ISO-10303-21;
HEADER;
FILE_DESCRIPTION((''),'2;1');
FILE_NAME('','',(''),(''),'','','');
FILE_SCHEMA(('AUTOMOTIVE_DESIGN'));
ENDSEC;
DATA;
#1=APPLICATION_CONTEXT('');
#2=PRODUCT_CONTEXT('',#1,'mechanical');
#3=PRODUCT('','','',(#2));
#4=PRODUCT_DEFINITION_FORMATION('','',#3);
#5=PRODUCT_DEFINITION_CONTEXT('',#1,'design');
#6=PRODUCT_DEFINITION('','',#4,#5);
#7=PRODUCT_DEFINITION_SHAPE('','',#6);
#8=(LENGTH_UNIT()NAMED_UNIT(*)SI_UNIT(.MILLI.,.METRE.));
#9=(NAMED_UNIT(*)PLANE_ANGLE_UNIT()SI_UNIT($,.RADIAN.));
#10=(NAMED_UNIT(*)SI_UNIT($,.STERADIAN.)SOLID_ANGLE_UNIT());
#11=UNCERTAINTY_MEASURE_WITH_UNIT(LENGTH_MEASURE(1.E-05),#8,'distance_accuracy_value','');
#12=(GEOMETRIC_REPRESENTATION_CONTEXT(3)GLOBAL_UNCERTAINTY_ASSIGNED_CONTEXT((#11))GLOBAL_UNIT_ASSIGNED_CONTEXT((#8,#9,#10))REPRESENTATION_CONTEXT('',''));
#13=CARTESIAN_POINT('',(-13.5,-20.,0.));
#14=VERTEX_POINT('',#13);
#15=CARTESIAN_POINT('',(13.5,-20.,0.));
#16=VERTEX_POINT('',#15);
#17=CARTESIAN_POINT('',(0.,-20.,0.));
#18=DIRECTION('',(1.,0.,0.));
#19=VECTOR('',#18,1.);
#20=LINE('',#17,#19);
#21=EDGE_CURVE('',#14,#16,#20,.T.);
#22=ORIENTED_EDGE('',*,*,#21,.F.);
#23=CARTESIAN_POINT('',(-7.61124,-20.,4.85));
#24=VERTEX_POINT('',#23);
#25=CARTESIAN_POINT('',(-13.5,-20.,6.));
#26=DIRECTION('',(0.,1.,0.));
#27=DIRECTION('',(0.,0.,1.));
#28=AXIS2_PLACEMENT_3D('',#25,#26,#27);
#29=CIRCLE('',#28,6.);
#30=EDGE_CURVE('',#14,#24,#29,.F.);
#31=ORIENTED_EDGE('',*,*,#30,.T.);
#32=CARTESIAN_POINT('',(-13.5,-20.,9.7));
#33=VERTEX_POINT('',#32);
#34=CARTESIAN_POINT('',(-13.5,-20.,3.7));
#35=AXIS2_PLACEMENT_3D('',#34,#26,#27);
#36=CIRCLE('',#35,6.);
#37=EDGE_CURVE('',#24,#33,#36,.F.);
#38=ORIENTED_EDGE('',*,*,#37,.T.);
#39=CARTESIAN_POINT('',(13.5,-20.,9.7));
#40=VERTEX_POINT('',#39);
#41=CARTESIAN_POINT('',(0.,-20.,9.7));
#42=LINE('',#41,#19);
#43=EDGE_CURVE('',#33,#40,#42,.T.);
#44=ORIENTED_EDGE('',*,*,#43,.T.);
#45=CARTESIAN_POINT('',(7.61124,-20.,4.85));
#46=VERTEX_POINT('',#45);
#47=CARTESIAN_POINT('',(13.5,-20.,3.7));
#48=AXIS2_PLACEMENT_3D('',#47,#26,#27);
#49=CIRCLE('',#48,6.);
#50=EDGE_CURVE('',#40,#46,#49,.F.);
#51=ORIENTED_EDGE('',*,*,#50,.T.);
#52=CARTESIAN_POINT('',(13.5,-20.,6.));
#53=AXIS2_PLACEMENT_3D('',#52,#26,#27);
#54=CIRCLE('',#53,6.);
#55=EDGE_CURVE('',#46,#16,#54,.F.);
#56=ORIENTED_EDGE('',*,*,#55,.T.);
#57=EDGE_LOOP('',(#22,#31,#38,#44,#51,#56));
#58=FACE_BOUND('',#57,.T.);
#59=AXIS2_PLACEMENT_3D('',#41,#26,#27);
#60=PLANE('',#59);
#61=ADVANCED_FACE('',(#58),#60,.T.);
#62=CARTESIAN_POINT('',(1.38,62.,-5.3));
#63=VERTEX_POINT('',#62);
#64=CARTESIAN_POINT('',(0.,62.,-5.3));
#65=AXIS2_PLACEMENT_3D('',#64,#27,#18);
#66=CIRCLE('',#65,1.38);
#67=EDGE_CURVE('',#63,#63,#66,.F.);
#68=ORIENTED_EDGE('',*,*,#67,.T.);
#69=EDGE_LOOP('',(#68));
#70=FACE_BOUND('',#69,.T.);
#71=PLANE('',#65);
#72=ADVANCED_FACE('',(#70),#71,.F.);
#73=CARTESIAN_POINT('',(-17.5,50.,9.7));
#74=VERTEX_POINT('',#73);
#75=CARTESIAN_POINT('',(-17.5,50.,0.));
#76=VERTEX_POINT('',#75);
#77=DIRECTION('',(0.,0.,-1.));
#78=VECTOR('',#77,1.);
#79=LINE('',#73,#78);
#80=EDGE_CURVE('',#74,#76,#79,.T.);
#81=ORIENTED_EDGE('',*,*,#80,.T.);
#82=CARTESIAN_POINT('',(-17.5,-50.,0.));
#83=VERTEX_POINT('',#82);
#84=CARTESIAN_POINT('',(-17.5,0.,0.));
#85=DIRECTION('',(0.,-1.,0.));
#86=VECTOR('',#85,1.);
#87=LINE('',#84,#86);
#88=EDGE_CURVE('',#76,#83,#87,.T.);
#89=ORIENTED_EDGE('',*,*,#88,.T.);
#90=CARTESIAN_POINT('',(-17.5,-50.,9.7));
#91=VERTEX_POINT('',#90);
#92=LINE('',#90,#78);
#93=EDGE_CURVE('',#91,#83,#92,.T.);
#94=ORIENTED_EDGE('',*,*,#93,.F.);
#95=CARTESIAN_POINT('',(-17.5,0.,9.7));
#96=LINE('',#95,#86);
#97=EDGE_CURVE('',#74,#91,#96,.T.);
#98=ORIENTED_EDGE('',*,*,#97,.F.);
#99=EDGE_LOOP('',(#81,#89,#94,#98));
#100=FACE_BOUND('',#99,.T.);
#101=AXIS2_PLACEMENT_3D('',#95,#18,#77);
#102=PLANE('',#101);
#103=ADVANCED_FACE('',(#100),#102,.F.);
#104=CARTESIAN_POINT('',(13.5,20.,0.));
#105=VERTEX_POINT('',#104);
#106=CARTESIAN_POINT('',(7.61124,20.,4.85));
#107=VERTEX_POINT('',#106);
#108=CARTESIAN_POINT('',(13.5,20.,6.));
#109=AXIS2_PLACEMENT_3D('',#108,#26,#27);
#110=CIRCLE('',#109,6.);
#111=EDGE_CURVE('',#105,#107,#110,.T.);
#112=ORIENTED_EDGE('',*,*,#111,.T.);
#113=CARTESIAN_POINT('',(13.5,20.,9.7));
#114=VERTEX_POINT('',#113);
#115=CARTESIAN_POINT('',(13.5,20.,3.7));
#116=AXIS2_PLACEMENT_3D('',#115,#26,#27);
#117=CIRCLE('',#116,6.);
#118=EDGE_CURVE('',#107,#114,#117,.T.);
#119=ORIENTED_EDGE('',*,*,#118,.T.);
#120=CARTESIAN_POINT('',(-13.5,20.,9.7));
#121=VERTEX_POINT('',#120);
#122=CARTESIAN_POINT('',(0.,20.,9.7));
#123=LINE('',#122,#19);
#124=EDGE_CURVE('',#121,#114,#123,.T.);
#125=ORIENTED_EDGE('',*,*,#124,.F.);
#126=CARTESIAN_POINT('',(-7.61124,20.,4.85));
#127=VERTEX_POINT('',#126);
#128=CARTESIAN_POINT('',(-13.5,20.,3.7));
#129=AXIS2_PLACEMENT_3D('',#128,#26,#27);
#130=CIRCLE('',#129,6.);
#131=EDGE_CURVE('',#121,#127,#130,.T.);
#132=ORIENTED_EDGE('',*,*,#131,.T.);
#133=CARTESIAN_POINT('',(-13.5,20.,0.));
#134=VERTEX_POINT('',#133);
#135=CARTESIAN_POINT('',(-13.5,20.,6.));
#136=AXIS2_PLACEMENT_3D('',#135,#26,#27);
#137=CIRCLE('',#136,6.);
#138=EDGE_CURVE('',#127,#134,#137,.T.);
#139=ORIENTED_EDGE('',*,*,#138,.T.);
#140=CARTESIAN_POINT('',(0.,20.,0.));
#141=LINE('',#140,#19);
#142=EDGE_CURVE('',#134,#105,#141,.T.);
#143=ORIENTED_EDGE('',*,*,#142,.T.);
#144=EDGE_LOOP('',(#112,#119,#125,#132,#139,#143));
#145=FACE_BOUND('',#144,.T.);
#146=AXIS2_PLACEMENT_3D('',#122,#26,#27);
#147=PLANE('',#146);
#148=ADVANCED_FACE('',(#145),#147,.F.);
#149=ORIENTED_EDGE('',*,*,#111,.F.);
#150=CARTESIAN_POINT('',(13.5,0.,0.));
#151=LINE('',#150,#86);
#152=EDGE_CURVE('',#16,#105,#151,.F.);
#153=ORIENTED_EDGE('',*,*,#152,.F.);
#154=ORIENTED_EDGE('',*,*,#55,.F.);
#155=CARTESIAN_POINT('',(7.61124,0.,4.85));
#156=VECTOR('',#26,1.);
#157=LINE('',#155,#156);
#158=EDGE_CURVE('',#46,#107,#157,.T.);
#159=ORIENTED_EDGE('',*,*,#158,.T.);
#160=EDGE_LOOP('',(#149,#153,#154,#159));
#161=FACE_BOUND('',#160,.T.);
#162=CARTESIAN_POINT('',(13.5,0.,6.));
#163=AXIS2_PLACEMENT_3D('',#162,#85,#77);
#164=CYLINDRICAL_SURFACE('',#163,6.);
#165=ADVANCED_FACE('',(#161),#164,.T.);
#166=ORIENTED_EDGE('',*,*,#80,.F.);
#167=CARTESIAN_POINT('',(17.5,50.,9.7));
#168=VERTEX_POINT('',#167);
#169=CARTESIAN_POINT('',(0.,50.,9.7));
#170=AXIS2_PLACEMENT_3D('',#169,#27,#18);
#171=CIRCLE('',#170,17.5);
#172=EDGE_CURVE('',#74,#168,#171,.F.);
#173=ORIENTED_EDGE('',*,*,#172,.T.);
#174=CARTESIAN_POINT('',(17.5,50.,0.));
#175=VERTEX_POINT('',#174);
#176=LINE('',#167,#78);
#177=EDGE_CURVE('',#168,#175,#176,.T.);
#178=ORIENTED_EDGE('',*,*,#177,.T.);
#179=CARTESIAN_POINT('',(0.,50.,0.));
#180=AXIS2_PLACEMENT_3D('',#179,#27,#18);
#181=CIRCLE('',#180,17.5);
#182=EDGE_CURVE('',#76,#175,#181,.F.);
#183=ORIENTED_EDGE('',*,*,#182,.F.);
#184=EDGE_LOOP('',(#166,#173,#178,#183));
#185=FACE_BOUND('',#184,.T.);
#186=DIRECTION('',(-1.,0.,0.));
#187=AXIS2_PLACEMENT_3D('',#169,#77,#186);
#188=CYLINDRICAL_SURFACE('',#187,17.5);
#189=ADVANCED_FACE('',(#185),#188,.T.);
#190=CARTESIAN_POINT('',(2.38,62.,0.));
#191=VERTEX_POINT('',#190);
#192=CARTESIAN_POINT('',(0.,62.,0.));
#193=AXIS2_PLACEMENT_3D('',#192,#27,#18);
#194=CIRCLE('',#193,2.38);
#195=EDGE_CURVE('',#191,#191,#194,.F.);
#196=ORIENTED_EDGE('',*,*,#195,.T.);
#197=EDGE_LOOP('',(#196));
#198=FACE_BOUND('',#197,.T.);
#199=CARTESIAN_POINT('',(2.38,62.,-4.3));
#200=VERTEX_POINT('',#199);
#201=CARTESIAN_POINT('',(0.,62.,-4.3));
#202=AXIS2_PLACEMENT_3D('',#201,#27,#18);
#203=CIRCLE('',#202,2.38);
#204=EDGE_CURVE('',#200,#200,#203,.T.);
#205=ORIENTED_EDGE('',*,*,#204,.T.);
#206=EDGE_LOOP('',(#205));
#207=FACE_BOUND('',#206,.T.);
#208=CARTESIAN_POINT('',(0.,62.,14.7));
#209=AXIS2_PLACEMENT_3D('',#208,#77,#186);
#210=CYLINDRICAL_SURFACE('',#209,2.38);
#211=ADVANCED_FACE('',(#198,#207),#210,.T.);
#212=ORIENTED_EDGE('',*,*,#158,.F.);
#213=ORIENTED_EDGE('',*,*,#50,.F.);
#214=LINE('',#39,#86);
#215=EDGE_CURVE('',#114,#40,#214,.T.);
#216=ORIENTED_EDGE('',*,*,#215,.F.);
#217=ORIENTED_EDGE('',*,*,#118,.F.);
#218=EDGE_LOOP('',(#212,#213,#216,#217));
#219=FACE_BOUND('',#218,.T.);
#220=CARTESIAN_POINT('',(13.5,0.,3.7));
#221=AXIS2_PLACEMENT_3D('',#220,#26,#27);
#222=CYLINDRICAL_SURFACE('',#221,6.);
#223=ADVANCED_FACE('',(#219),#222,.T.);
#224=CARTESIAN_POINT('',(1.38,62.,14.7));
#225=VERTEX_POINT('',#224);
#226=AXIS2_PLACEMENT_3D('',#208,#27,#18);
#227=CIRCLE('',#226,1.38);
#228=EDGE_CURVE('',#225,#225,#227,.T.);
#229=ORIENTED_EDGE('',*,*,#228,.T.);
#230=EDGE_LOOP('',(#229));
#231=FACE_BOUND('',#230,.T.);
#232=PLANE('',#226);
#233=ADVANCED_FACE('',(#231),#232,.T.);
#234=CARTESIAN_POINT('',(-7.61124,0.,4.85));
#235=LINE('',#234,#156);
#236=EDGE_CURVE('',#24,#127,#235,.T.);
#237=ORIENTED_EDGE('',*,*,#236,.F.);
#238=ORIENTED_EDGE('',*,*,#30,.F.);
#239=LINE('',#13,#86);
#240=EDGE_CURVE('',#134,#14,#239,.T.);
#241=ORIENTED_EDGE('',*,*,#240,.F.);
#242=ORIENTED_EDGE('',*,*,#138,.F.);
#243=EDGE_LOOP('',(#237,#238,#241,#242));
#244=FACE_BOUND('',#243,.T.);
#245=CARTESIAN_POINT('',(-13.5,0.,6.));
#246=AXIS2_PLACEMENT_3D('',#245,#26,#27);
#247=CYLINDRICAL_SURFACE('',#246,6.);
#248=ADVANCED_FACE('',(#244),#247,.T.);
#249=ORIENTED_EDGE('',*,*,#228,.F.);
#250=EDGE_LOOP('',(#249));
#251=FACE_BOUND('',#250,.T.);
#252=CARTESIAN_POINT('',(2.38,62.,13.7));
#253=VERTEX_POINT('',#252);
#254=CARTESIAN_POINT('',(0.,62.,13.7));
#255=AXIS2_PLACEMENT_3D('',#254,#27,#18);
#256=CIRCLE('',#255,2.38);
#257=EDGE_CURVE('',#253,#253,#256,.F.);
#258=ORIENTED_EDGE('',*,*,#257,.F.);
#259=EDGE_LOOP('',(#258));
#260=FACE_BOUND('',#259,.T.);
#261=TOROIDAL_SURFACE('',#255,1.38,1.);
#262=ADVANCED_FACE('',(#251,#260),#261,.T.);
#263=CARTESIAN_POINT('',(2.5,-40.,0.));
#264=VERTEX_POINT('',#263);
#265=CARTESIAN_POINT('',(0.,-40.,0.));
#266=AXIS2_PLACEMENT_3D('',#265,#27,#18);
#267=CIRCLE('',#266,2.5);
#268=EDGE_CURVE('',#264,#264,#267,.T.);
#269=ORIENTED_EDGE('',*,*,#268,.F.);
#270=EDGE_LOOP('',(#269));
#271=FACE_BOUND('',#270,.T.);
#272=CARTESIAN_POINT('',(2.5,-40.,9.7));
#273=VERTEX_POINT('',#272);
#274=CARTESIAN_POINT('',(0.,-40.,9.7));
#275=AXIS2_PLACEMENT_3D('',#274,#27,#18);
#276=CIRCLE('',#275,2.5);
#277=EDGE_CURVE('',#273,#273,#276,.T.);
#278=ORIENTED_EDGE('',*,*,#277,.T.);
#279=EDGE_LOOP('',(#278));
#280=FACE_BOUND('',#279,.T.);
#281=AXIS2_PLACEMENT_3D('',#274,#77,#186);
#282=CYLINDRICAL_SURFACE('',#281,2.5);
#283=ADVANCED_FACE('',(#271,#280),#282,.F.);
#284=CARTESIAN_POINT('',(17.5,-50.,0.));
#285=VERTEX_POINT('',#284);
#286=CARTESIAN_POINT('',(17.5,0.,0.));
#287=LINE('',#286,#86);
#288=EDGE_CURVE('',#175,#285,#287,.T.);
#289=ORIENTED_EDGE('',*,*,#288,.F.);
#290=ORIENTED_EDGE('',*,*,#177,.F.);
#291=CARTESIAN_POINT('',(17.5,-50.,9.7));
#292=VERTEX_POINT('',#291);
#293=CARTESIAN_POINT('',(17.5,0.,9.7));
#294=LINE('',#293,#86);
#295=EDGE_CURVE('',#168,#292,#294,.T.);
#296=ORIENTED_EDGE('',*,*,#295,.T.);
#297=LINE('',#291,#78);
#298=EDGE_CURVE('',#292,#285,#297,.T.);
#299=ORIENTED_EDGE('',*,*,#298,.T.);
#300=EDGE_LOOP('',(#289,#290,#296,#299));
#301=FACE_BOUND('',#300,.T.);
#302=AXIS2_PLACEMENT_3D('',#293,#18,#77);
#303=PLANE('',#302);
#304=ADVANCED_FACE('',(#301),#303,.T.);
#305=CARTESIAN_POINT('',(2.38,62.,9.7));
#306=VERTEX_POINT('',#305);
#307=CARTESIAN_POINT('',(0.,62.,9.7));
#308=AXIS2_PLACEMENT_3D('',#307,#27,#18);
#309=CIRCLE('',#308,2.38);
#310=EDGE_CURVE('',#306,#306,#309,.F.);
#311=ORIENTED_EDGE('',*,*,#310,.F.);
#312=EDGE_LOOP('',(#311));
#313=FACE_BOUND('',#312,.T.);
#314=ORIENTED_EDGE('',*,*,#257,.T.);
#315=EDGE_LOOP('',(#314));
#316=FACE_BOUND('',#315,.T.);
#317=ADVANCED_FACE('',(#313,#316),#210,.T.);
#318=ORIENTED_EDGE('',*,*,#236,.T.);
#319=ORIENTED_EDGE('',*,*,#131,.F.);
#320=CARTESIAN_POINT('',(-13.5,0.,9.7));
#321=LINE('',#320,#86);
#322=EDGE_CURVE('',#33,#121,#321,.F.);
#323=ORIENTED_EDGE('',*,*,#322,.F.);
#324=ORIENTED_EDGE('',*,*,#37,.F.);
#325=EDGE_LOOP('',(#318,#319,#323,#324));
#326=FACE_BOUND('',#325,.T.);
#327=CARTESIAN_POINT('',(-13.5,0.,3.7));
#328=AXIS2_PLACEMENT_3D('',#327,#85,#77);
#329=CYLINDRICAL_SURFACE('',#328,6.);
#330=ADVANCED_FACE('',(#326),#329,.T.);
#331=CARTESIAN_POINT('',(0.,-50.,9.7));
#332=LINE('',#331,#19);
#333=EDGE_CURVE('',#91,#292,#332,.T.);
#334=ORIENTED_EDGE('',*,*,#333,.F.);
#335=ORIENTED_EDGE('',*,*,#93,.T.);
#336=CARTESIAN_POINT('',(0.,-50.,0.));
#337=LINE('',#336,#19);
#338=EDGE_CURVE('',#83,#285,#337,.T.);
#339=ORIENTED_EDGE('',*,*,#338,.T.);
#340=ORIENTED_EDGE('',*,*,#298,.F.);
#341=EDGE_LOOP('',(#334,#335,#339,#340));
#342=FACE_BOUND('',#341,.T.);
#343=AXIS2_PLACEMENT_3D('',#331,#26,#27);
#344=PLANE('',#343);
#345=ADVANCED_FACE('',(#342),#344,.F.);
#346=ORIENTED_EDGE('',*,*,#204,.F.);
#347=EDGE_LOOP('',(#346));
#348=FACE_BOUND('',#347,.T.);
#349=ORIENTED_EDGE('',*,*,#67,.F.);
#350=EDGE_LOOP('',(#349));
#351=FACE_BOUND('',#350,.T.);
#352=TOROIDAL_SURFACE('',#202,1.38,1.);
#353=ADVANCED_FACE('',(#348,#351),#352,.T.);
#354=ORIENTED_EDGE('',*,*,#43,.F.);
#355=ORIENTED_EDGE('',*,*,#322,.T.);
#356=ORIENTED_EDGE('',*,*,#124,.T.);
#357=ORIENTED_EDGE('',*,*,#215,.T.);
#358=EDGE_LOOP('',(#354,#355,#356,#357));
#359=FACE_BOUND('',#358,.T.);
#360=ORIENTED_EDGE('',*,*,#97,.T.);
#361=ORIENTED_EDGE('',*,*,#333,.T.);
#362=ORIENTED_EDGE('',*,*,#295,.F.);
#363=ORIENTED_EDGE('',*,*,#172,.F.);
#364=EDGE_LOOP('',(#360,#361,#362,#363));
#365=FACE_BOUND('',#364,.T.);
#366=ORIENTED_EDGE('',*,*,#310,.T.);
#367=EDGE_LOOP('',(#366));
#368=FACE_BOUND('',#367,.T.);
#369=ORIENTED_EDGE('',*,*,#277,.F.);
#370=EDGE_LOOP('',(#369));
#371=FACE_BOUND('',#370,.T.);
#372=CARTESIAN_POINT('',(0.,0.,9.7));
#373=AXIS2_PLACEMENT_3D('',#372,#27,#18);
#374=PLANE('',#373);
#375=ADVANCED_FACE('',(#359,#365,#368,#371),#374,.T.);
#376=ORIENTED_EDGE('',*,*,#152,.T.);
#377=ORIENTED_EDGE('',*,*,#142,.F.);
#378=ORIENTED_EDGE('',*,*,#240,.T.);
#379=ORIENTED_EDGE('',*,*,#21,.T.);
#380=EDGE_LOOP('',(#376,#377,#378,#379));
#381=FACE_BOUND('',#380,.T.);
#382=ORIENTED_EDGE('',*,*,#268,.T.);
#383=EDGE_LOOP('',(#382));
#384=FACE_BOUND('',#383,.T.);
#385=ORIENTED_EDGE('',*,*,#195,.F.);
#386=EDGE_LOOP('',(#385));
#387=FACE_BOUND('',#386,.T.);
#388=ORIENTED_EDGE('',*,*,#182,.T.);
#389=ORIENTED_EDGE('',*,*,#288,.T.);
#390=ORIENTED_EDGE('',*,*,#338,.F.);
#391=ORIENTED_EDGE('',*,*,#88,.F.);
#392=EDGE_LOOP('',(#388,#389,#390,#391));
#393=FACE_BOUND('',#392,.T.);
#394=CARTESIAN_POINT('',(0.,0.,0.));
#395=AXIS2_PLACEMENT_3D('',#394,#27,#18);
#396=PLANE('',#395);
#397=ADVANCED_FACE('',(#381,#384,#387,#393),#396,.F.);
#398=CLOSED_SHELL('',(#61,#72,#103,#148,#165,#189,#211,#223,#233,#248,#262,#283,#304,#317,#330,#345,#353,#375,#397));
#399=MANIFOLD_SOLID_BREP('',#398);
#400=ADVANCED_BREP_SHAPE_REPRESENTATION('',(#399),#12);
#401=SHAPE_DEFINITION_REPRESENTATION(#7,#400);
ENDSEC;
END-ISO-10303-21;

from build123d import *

# Parameters (mm, degrees)
SKETCH1_R           = 2.5
SKETCH1_W           = 15
SKETCH1_H           = 40
BOSS_EXTRUDE1_DEPTH = 9.7
BOSS_EXTRUDE2_START = -5
SKETCH2_R           = 2.38
BOSS_EXTRUDE2_DEPTH = 10
FILLET1_R           = 1
FILLET2_R           = 6


with BuildPart() as part:
    # Sketch1 → Boss-Extrude1 (new body)
    # profile 1 of 2: a face of its own
    with BuildSketch(Plane.XY):
        with BuildLine():
            ThreePointArc((-17.5, 50), (0, 67.5), (17.5, 50))
            Line((17.5, 50), (17.5, -50))
            Line((17.5, -50), (-17.5, -50))
            Line((-17.5, -50), (-17.5, 50))
        make_face()
        with Locations((0, -40)):
            Circle(SKETCH1_R, mode=Mode.SUBTRACT)
        Rectangle(SKETCH1_W, SKETCH1_H, mode=Mode.SUBTRACT)
    # profile 2 of 2: a face of its own
    with BuildSketch(Plane.XY):
        with BuildLine():
            ThreePointArc((-17.5, 50), (0, 67.5), (17.5, 50))
            Line((17.5, 50), (-17.5, 50))
        make_face()
    extrude(amount=BOSS_EXTRUDE1_DEPTH)

    # Sketch2 → Boss-Extrude2 (add, symmetric)
    with BuildSketch(Plane.XY.offset(9.7).offset(BOSS_EXTRUDE2_START)):
        with Locations((0, 62)):
            Circle(SKETCH2_R)
    extrude(amount=BOSS_EXTRUDE2_DEPTH, both=True)

    # Fillet1
    fillet1_edges = [part.edges().sort_by_distance(p)[0] for p in [
        (-2.38, 62, -5.3),
        (-2.38, 62, 14.7),
    ]]
    fillet(fillet1_edges, radius=FILLET1_R)

    # Fillet2
    # the kernel refuses this fillet: 6 mm, written as the material it takes off along each edge
    with BuildSketch(Plane(origin=(7.5, 20, 0), x_dir=(1, 0, 0), z_dir=(0, -1, 0)), Plane(origin=(7.5, 20, 9.7), x_dir=(0, 0, -1), z_dir=(0, -1, 0)), Plane(origin=(-7.5, -20, 0), x_dir=(-1, 0, 0), z_dir=(0, 1, 0)), Plane(origin=(-7.5, -20, 9.7), x_dir=(0, 0, -1), z_dir=(0, 1, 0))) as fillet2_piece_1:
        with BuildLine():
            CenterArc((FILLET2_R, FILLET2_R), FILLET2_R, 180, 90)
            Line((0, FILLET2_R), (0, 0))
            Line((0, 0), (FILLET2_R, 0))
        make_face()
    extrude(amount=40, mode=Mode.SUBTRACT)


solid = part.part
